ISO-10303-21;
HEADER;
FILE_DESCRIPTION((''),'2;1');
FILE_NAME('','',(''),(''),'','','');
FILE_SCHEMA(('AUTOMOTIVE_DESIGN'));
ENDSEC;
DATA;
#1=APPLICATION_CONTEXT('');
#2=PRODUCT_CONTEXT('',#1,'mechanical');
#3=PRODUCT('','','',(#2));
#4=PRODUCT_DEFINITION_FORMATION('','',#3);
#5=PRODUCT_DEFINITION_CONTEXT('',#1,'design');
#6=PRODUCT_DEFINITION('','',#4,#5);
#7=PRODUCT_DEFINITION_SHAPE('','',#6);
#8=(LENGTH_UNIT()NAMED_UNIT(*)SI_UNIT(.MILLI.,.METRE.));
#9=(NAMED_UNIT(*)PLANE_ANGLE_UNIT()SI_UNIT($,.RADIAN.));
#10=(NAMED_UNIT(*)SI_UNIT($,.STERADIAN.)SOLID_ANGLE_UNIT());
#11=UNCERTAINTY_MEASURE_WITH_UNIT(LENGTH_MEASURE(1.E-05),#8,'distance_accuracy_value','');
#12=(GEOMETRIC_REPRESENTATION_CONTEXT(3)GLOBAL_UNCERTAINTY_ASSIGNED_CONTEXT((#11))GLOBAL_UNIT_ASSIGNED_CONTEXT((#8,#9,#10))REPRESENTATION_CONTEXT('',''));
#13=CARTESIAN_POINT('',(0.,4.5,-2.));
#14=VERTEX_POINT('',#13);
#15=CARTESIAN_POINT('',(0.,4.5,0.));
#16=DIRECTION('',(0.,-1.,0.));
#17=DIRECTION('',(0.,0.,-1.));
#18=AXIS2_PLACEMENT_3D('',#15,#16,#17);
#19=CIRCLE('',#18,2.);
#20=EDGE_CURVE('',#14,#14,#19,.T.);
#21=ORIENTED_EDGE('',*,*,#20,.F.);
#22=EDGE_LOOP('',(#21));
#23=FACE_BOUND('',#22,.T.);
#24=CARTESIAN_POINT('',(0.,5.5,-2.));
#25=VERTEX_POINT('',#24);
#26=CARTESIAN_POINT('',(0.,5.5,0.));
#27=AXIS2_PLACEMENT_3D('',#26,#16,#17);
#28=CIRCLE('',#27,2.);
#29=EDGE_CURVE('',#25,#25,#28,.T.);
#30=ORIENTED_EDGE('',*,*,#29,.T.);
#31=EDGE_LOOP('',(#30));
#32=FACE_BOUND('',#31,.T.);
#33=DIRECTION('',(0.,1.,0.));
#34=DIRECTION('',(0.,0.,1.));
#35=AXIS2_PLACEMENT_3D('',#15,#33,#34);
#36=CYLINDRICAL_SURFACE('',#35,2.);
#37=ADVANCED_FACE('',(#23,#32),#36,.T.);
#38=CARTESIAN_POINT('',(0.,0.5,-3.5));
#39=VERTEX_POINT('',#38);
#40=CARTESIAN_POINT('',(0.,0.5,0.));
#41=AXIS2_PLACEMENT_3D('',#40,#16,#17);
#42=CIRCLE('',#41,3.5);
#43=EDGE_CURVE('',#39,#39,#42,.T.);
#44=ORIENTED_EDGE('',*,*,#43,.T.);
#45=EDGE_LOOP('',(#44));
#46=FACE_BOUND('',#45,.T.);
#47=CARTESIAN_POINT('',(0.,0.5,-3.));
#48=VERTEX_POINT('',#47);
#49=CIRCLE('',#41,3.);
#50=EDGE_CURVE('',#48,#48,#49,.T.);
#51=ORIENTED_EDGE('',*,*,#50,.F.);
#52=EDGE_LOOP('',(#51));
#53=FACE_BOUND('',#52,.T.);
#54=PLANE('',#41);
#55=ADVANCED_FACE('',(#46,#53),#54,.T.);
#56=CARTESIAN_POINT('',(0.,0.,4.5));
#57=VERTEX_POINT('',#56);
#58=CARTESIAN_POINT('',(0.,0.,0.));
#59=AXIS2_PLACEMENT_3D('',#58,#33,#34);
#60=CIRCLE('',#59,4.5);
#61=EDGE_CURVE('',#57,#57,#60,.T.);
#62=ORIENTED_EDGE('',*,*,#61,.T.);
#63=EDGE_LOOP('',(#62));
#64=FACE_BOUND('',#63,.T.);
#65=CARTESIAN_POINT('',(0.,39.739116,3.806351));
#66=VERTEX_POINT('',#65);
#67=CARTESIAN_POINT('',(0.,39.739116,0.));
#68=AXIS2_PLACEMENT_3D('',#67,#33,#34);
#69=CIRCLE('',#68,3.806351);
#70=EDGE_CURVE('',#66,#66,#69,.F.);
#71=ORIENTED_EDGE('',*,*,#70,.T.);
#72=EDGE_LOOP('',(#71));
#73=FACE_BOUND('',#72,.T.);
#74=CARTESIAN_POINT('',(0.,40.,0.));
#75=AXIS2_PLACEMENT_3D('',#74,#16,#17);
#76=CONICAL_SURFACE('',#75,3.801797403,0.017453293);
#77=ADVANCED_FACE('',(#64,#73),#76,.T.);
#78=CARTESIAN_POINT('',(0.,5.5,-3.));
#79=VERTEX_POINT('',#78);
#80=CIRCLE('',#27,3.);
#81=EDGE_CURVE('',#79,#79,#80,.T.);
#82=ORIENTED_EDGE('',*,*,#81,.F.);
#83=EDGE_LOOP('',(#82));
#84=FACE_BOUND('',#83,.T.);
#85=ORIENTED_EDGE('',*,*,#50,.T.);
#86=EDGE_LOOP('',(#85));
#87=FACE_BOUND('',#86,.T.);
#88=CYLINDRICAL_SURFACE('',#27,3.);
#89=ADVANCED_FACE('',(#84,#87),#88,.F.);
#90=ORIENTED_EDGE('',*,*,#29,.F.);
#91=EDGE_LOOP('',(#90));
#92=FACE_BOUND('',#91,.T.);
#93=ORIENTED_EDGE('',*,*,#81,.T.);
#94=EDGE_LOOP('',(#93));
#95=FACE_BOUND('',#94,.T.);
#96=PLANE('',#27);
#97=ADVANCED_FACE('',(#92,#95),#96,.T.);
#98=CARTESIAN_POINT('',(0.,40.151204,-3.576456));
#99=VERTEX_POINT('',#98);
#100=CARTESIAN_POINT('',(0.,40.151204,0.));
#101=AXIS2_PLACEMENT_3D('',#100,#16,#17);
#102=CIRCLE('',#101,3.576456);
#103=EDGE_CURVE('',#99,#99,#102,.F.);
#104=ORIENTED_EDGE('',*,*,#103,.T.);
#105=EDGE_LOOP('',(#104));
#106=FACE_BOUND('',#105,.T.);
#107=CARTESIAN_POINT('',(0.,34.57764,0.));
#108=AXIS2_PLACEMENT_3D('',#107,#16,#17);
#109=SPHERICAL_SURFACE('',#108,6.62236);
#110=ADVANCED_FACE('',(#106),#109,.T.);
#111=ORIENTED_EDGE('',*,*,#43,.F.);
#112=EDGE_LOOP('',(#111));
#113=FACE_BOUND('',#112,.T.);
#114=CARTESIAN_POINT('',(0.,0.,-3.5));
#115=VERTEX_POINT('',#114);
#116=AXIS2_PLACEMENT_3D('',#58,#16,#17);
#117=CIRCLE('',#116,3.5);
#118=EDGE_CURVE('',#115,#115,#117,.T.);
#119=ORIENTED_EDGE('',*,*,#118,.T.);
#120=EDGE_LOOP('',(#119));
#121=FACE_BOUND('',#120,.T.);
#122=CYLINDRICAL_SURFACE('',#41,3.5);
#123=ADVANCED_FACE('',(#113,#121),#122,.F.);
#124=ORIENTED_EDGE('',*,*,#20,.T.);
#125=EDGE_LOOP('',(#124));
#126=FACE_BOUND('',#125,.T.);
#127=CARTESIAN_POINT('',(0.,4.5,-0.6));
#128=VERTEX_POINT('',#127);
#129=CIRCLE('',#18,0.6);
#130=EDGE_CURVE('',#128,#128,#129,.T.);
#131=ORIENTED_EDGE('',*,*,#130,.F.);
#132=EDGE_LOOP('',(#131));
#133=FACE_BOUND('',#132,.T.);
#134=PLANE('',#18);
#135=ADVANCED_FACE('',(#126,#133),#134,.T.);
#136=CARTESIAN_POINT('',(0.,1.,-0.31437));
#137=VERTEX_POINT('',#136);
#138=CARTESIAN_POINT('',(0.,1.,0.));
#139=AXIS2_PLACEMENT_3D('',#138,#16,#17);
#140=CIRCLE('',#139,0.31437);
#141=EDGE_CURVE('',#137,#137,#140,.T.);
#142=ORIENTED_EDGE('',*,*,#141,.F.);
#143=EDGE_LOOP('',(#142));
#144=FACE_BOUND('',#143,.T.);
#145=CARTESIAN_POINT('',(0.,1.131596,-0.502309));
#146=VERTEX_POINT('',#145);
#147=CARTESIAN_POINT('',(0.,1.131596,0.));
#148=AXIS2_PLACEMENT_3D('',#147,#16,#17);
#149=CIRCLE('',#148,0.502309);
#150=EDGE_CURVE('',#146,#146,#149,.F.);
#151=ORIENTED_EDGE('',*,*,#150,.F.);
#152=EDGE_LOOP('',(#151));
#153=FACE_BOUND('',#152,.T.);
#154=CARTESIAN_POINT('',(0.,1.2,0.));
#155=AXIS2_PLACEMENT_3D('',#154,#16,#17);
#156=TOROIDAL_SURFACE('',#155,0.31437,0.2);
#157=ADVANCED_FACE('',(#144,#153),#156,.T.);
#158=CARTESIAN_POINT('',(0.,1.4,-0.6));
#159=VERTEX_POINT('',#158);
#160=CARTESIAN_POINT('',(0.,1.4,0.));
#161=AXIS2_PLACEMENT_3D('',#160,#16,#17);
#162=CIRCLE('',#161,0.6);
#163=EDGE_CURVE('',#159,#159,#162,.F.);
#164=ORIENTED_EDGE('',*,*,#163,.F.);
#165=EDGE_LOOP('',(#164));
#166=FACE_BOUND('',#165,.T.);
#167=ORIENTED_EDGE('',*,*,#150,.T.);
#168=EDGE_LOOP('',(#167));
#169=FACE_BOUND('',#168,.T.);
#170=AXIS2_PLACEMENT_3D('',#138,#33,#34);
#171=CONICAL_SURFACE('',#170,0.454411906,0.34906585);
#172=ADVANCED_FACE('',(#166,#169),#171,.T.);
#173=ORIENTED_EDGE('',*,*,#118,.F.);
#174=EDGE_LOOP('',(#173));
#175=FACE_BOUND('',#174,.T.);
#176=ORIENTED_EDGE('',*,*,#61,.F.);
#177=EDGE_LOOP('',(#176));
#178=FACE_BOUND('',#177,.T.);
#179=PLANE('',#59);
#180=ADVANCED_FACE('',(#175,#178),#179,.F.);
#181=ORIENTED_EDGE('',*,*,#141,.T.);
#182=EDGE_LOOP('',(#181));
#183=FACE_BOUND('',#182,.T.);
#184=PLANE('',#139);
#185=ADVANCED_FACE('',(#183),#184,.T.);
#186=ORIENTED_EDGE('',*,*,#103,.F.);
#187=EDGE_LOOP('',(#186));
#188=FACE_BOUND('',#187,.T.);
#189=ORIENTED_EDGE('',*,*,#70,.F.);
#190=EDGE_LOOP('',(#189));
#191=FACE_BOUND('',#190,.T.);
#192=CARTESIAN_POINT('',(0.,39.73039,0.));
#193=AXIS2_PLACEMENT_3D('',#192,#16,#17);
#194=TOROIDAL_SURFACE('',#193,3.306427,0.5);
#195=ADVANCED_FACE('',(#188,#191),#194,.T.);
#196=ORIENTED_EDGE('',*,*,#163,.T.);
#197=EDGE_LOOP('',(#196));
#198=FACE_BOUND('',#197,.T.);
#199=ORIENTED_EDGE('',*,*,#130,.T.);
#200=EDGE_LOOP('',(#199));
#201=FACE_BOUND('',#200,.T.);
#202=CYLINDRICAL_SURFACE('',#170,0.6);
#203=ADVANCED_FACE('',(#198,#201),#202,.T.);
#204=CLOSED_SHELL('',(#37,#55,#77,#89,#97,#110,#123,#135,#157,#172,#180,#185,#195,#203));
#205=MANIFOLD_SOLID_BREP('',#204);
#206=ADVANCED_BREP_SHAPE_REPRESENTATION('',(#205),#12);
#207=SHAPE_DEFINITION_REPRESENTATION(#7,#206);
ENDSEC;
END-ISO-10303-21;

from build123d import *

# Parameters (mm, degrees)
SKETCH1_R           = 4.5
BOSS_EXTRUDE3_DEPTH = 40
SKETCH4_R           = 3.5
CUT_EXTRUDE3_DEPTH  = 0.5
SKETCH5_R           = 3
CUT_EXTRUDE4_DEPTH  = 5
SKETCH6_R           = 2
BOSS_EXTRUDE4_DEPTH = 1
SKETCH7_R           = 0.6
BOSS_EXTRUDE5_DEPTH = 3.5
CHAMFER1_SIZE       = 0.4
CHAMFER1_SIZE2      = 0.145588094
FILLET1_R           = 0.2
CHAMFER2_SIZE       = 40
CHAMFER2_SIZE_2     = 0.698202597
FILLET2_R           = 0.5


# Read off the part's stored shape, not the designer's step: Dome1
with BuildPart() as part:
    # Sketch1 → Boss-Extrude3 (new body)
    with BuildSketch(Plane(origin=(0, 0, 0), x_dir=(1, 0, 0), z_dir=(0, 1, 0))):
        with Locations(Location((0, 0, 0), (0, 0, 270))):
            Circle(SKETCH1_R)
    extrude(amount=BOSS_EXTRUDE3_DEPTH)

    # Sketch4 → Cut-Extrude3 (cut)
    with BuildSketch(Plane.XZ):
        with Locations(Location((0, 0, 0), (0, 0, 270))):
            Circle(SKETCH4_R)
    extrude(amount=-CUT_EXTRUDE3_DEPTH, mode=Mode.SUBTRACT)

    # Sketch5 → Cut-Extrude4 (cut)
    with BuildSketch(Plane.XZ.offset(-0.5)):
        with Locations(Location((0, 0, 0), (0, 0, 270))):
            Circle(SKETCH5_R)
    extrude(amount=-CUT_EXTRUDE4_DEPTH, mode=Mode.SUBTRACT)

    # Sketch6 → Boss-Extrude4 (add)
    with BuildSketch(Plane.XZ.offset(-5.5)):
        with Locations(Location((0, 0, 0), (0, 0, 270))):
            Circle(SKETCH6_R)
    extrude(amount=BOSS_EXTRUDE4_DEPTH)

    # Sketch7 → Boss-Extrude5 (add)
    with BuildSketch(Plane.XZ.offset(-4.5)):
        with Locations(Location((0, 0, 0), (0, 0, 270))):
            Circle(SKETCH7_R)
    extrude(amount=BOSS_EXTRUDE5_DEPTH)

    # Chamfer1
    chamfer1_edges = [part.edges().sort_by_distance(p)[0] for p in [
        (0, 1, 0.6),
    ]]
    chamfer1_side = [part.faces().sort_by_distance(p)[0] for p in [
        (0, 2.75, 0.6),
    ]]
    chamfer(chamfer1_edges, length=CHAMFER1_SIZE, length2=CHAMFER1_SIZE2, reference=chamfer1_side[0])

    # Fillet1
    fillet1_edges = [part.edges().sort_by_distance(p)[0] for p in [
        (0, 1, 0.454411906),
    ]]
    fillet(fillet1_edges, radius=FILLET1_R)

    # Chamfer2
    # the kernel refuses this chamfer: 40, 0.698202597 mm, written as the material it takes off along each edge
    with BuildSketch(Plane(origin=(0, 40, 0), x_dir=(0, 0, 1), z_dir=(-1, 0, 0))) as chamfer2_piece_1:
        Polygon((4.5, -CHAMFER2_SIZE), (4.5 - CHAMFER2_SIZE_2, 0), (4.5, 0), align=None)
    revolve(axis=Axis((0, 40, 0), (0, 1, 0)), mode=Mode.SUBTRACT)

    # Dome1 outline → Dome1 (revolve)
    with BuildSketch(Plane.XY):
        with BuildLine():
            Line((0, 40), (3.801797408, 39.999999996))
            ThreePointArc((3.801797408, 39.999999996), (1.993342892, 40.892878392), (0, 41.2))
            Line((0, 41.2), (0, 40))
        make_face()
    revolve(axis=Axis((0, 0, 0), (0, 1, 0)))

    # Fillet2
    fillet2_edges = [part.edges().sort_by_distance(p)[0] for p in [
        (2.688276724, 40, 2.688276724),
    ]]
    fillet(fillet2_edges, radius=FILLET2_R)


solid = part.part
